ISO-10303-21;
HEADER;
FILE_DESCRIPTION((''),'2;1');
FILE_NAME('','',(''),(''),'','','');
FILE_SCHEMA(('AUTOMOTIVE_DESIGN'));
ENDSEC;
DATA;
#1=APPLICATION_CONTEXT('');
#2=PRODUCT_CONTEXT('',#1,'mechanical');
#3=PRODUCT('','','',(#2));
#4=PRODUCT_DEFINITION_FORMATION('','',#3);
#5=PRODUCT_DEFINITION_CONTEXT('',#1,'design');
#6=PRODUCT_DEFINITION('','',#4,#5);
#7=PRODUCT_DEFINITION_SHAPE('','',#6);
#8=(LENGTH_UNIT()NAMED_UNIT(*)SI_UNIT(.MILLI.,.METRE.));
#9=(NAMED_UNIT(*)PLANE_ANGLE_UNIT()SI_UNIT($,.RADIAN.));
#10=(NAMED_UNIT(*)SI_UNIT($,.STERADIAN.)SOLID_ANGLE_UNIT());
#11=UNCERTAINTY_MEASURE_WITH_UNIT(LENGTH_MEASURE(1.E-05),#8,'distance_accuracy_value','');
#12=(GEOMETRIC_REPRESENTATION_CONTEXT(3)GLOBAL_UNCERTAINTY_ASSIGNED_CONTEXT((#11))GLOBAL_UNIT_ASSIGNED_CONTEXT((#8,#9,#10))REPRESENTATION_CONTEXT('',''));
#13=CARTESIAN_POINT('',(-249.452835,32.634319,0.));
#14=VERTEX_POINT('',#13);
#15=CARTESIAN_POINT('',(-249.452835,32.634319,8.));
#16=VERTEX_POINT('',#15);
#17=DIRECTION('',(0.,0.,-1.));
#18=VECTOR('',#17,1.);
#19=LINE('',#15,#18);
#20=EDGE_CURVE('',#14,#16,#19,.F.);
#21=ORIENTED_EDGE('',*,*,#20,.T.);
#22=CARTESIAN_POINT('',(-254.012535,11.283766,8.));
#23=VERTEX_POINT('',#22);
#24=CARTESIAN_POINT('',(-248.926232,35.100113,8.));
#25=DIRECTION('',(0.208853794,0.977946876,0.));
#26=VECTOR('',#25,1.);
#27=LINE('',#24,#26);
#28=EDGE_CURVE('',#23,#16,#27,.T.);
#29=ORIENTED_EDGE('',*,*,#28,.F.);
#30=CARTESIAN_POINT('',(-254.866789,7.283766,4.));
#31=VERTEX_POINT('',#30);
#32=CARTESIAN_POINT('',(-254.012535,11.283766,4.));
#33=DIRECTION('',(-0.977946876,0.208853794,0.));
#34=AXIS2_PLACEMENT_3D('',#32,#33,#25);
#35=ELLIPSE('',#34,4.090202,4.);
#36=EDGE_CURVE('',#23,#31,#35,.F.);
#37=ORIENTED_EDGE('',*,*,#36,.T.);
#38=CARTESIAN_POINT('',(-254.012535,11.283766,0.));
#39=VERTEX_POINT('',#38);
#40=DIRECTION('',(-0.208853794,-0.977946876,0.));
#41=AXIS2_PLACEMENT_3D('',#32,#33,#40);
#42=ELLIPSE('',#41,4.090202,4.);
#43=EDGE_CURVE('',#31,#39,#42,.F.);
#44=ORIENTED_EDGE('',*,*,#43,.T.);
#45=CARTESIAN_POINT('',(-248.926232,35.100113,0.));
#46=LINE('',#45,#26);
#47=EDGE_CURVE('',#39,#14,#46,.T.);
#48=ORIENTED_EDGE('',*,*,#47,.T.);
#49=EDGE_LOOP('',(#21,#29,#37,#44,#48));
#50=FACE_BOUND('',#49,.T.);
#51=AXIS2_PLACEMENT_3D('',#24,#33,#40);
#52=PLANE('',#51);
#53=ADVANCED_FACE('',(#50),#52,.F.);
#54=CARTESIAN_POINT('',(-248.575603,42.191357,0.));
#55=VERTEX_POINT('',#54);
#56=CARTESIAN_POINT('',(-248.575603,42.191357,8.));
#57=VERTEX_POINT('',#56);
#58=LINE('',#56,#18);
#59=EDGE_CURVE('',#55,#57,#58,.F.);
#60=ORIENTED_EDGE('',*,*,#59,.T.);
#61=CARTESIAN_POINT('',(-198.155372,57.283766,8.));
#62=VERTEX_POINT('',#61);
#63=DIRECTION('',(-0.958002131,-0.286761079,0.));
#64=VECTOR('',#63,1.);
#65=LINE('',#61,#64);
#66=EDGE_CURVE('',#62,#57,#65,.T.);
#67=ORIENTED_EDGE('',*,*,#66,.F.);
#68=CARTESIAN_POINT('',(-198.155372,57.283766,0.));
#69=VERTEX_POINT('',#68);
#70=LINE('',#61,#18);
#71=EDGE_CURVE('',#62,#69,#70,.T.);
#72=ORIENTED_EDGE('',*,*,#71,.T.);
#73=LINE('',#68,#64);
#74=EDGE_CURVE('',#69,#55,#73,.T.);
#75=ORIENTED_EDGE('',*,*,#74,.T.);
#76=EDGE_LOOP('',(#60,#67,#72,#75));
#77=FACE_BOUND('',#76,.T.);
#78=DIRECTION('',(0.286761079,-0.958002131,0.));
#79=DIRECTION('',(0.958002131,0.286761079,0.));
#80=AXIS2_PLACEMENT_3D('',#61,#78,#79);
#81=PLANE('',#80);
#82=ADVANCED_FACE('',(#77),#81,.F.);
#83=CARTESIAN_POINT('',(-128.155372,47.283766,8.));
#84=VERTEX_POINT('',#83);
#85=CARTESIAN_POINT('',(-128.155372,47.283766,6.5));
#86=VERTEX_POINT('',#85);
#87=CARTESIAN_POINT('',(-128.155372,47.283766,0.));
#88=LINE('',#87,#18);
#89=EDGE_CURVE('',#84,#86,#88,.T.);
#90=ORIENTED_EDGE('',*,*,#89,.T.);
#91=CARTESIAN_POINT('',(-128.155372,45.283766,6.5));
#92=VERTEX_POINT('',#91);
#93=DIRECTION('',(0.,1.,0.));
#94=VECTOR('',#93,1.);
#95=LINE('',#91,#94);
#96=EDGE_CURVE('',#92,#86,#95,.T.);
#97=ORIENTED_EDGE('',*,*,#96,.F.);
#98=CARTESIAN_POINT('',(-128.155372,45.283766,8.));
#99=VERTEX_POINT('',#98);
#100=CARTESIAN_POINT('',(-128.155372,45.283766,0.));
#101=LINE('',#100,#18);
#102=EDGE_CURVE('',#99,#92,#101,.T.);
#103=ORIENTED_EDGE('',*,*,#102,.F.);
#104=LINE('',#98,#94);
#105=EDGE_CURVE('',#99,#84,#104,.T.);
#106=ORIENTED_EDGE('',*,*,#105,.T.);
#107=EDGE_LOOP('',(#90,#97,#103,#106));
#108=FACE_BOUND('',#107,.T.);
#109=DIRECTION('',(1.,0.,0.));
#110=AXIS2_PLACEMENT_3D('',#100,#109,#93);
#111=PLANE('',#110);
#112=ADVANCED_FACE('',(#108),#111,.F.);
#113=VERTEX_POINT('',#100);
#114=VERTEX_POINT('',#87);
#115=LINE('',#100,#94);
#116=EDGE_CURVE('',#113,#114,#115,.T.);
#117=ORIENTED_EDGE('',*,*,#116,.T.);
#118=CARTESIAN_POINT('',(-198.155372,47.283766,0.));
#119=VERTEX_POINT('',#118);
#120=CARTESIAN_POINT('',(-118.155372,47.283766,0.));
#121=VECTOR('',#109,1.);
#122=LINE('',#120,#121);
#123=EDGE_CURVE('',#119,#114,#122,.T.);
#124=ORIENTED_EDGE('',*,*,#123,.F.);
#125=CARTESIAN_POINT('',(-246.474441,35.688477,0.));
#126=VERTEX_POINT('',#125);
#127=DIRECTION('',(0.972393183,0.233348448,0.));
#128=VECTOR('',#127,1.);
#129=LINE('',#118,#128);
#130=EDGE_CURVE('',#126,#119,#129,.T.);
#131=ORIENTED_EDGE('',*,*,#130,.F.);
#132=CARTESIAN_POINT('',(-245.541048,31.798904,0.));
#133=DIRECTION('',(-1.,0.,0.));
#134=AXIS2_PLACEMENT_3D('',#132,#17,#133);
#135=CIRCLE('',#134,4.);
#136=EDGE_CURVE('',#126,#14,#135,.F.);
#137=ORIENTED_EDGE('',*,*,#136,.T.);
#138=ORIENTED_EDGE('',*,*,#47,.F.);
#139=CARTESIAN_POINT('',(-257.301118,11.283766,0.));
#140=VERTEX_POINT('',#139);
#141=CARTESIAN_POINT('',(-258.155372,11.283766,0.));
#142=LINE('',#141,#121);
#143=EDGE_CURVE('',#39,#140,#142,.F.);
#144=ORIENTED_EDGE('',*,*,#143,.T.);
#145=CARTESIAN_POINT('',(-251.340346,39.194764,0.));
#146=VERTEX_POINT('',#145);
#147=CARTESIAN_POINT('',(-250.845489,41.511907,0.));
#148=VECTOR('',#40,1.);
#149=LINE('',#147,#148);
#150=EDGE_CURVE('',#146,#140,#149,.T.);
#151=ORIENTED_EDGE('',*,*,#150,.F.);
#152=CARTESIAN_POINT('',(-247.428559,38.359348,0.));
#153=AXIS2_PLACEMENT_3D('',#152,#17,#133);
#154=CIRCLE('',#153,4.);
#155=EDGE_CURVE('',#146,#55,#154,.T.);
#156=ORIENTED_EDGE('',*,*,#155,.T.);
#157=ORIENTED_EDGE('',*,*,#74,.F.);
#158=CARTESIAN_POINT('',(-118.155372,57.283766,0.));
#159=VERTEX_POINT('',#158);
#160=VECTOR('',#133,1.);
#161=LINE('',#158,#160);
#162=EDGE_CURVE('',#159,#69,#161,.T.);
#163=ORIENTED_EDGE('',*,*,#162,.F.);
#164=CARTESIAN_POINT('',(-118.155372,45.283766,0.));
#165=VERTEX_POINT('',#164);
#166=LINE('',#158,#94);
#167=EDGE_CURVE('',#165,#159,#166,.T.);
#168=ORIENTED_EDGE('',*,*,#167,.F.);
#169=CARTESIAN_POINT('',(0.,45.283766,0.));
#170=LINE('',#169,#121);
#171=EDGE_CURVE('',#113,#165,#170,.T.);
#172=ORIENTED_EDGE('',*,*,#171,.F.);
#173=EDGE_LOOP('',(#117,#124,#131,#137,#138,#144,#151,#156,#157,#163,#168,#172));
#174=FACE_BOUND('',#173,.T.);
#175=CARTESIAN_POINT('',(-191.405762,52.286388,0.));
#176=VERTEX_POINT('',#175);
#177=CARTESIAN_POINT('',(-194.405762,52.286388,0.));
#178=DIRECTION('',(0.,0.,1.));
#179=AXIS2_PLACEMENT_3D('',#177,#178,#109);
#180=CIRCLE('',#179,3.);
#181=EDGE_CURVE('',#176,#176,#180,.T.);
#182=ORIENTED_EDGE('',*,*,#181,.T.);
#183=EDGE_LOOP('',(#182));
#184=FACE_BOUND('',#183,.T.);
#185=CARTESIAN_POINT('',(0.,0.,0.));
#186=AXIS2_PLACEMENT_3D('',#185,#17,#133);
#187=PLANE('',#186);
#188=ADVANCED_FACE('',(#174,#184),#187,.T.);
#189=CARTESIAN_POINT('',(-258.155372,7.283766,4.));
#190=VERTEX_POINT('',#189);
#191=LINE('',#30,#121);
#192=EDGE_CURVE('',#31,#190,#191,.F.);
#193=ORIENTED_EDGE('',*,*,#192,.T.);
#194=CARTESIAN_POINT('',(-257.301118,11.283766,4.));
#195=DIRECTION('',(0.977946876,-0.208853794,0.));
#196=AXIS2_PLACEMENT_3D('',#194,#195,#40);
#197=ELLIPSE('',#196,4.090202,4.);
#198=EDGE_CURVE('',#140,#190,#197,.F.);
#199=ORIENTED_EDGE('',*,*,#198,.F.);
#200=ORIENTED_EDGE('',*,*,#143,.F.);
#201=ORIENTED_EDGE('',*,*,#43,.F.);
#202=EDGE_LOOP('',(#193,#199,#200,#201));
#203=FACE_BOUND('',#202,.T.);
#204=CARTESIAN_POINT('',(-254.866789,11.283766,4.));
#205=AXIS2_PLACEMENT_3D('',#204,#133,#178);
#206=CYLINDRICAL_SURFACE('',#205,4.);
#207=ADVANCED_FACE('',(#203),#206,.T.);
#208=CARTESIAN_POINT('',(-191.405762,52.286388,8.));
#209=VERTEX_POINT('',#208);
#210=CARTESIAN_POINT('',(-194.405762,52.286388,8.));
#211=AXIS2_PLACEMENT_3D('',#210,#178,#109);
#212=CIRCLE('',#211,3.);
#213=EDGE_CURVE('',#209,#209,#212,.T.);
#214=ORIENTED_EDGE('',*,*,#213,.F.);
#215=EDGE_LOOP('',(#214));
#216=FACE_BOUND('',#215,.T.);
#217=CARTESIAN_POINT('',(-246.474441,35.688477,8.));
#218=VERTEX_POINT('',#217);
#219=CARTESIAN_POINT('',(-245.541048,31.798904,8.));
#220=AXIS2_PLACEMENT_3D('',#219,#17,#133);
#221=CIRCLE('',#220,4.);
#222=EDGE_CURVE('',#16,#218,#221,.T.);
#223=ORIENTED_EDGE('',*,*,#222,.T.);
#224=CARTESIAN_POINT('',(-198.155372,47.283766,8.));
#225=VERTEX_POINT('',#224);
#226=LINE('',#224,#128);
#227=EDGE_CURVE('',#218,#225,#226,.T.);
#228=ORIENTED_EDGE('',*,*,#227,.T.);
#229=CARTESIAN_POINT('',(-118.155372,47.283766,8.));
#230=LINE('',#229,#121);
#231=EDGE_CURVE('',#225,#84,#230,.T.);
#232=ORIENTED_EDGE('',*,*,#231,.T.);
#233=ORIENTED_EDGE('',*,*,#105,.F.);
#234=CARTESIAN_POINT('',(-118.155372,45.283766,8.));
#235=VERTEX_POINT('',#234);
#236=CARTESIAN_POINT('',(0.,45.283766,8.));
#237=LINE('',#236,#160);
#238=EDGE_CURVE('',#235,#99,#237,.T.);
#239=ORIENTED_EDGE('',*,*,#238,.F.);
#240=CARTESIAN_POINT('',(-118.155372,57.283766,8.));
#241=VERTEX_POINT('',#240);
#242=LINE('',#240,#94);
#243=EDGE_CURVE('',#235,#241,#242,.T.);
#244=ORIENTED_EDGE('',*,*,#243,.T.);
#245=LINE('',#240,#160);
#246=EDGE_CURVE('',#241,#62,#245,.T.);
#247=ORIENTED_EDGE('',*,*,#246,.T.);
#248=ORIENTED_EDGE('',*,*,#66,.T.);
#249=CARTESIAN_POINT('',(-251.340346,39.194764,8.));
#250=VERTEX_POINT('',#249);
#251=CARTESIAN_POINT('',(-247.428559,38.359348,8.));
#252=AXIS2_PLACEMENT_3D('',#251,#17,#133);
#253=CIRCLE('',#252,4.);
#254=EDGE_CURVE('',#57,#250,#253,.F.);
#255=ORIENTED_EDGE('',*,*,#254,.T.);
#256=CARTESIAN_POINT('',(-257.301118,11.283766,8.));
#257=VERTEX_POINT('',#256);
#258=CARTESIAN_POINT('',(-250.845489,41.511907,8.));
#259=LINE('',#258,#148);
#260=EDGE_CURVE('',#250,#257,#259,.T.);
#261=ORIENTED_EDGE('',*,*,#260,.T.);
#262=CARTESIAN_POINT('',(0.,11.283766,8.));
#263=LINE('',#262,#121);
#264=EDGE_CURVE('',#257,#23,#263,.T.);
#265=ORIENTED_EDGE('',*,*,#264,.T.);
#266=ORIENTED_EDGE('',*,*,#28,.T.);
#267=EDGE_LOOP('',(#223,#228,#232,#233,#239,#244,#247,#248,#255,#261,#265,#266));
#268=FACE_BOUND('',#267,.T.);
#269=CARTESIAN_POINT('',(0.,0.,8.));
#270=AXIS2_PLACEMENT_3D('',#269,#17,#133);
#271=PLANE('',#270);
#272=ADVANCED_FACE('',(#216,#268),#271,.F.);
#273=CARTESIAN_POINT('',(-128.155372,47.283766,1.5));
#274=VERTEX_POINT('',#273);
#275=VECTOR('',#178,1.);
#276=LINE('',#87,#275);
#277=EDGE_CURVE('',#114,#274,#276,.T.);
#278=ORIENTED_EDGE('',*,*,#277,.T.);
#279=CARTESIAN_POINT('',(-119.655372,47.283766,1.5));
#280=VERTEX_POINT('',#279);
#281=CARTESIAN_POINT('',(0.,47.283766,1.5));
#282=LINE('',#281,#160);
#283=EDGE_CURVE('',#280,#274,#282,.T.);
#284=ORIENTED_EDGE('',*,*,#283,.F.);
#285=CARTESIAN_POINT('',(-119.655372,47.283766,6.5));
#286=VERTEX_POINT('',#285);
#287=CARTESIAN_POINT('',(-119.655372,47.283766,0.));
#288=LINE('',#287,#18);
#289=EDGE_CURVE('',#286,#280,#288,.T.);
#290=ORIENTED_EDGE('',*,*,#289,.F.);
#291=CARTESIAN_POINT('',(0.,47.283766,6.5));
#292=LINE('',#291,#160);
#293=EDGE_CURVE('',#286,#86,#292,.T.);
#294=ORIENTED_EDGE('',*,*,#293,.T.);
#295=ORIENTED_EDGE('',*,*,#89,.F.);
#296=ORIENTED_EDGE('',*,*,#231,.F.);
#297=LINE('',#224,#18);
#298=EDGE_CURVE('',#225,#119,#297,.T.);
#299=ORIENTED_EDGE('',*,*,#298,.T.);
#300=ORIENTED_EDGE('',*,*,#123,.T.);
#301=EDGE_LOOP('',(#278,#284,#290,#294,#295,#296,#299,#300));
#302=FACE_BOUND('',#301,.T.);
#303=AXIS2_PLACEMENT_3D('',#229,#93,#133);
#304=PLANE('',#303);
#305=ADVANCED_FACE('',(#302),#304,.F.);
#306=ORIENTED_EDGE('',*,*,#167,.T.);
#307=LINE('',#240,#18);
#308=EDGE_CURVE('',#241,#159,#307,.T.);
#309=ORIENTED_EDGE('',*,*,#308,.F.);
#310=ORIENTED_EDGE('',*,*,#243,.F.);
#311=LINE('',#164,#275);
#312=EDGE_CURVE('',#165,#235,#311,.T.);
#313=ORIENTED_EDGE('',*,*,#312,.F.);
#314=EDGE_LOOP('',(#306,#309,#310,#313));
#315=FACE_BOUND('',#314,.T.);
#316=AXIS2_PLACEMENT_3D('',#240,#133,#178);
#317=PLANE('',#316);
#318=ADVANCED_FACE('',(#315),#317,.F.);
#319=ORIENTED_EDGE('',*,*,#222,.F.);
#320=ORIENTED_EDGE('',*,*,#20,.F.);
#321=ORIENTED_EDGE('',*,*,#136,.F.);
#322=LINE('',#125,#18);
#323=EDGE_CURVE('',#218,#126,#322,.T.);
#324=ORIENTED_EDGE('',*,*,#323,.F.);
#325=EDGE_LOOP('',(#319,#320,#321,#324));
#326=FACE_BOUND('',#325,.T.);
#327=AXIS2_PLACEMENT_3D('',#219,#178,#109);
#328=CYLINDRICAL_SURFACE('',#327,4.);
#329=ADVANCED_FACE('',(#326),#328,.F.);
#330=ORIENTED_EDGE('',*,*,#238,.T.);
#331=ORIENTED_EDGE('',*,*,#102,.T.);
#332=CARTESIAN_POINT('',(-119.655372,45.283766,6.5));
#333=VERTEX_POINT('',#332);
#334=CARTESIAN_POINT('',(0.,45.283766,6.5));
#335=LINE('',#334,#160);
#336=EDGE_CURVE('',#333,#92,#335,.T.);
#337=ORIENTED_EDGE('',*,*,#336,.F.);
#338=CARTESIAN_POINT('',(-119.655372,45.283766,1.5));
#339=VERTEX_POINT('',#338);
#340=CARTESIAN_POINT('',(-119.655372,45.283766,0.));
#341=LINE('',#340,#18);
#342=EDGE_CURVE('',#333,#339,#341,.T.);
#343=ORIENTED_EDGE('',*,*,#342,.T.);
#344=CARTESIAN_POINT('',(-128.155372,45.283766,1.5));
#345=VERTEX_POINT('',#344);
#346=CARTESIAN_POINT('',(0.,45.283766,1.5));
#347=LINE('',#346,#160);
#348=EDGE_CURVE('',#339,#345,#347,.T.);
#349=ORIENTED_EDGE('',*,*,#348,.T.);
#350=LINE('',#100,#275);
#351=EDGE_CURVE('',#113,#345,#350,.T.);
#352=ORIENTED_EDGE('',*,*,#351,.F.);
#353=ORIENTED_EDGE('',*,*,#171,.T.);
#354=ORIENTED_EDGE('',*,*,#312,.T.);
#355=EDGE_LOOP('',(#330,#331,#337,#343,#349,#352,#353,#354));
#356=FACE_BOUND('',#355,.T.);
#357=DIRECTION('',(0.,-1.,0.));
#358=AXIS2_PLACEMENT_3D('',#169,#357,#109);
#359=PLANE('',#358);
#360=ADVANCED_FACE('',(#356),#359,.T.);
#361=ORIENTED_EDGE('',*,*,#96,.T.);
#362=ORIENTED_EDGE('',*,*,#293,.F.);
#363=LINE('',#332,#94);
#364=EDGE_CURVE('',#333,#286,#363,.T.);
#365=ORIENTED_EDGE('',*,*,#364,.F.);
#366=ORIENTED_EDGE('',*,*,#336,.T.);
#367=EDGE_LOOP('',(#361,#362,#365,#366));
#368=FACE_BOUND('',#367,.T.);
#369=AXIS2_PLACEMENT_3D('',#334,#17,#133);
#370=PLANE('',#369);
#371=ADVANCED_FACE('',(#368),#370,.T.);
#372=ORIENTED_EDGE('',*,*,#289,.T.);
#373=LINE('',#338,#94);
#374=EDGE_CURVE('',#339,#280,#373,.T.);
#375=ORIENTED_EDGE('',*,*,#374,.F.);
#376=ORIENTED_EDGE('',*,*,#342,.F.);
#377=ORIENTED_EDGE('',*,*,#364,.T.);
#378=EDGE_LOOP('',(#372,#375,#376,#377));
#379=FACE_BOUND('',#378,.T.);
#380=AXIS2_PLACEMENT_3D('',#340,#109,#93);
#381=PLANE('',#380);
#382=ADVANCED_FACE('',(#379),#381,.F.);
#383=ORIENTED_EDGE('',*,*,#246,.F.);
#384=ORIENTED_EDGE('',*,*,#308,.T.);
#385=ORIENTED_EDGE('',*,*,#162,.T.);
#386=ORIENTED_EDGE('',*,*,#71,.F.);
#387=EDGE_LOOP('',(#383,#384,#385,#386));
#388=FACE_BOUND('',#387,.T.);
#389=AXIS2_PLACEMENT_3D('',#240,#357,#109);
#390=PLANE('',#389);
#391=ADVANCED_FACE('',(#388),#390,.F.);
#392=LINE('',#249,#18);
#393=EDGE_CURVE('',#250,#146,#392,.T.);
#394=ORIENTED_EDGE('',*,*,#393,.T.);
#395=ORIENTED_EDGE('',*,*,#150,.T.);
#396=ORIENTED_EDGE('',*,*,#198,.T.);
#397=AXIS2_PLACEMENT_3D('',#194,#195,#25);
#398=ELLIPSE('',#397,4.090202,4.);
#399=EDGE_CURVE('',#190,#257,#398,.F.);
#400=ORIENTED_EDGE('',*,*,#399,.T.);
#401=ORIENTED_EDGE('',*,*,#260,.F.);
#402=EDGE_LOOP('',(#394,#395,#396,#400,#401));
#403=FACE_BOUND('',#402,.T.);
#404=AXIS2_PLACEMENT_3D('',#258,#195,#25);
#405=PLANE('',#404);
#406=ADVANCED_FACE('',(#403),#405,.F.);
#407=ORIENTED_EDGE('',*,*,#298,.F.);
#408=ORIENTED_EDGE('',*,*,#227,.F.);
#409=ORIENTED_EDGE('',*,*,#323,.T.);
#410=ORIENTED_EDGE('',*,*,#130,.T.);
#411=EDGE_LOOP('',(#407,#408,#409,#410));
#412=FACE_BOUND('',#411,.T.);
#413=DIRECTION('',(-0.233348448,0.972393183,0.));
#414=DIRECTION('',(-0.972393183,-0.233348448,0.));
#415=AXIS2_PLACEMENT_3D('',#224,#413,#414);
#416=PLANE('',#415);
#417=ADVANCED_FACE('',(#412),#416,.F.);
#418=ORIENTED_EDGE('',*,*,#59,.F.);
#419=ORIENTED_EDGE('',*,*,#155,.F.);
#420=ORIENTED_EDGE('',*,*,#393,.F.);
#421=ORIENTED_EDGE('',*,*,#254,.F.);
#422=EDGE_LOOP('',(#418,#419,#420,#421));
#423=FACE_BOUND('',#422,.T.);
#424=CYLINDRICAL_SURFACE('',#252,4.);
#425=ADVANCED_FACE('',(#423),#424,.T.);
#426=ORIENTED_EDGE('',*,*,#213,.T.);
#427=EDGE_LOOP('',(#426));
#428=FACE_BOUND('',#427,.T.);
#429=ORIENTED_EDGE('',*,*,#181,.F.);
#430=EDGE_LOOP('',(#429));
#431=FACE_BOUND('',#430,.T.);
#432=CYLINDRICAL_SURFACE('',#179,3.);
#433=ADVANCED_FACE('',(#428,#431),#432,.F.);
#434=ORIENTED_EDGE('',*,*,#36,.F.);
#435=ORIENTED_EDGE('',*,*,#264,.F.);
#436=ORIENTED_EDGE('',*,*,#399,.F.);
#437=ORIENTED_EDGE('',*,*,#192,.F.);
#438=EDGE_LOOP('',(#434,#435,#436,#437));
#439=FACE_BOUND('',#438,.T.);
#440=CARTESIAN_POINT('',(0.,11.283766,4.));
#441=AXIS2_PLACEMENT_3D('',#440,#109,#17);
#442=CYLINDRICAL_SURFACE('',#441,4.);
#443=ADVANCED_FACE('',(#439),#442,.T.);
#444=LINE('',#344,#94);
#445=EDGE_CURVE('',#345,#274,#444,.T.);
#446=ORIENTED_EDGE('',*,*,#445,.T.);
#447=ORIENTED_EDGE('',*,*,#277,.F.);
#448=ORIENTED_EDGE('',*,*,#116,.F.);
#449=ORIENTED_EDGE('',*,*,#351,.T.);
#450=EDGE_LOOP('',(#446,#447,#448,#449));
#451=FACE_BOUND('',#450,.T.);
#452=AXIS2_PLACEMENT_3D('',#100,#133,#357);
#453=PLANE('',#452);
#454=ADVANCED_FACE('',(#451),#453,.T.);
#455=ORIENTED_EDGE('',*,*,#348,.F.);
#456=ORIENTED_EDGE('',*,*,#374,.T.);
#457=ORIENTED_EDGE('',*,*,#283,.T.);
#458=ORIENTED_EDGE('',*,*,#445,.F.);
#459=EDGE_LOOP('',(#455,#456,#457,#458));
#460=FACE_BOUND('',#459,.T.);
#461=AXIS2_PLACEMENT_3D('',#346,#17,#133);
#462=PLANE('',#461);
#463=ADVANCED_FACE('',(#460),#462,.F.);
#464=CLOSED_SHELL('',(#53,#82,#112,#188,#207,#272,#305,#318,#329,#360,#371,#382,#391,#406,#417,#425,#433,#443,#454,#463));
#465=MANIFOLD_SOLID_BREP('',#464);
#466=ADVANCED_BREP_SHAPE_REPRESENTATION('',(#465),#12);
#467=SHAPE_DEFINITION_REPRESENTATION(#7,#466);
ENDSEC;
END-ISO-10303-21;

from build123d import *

# Parameters (mm, degrees)
BOSS_EXTRUDE1_DEPTH = 8
SKETCH5_W           = 1.5
SKETCH5_H           = 2.448371941
BOSS_EXTRUDE4_DEPTH = 2
SKETCH6_R           = 3
CUT_EXTRUDE1_DEPTH  = 265.555525233
FILLET1_R           = 4


with BuildPart() as part:
    # Sketch1 → Boss-Extrude1 (new body)
    with BuildSketch(Plane.XY):
        Polygon((-118.155372005, 57.283765903), (-198.155372005, 57.283765903), (-250.845489232, 41.511906575), (-258.155372005, 7.283765903), (-254.866788986, 7.283765903), (-248.926231582, 35.100112729), (-198.155372005, 47.283765903), (-118.155372005, 47.283765903), align=None)
    extrude(amount=BOSS_EXTRUDE1_DEPTH)

    # Sketch5 → Boss-Extrude4 (add)
    with BuildSketch(Plane.XZ.offset(-47.283765903)):
        Polygon((-128.155372005, 6.5), (-119.655372005, 6.5), (-118.155372005, 6.5), (-118.155372005, 8), (-128.155372005, 8), align=None)
        Polygon((-119.655372005, 4.051628059), (-119.655372005, 3.948371941), (-118.155372005, 3.948371941), (-118.155372005, 6.5), (-119.655372005, 6.5), align=None)
        with Locations((-118.905372005, 2.724185971)):
            Rectangle(SKETCH5_W, SKETCH5_H)
        Polygon((-118.155372005, 1.5), (-119.655372005, 1.5), (-128.155372005, 1.5), (-128.155372005, 0), (-118.155372005, 0), align=None)
    extrude(amount=BOSS_EXTRUDE4_DEPTH)

    # Sketch6 → Cut-Extrude1 (cut, through all)
    with BuildSketch(Plane.XY.offset(8)):
        with Locations((-194.405761522, 52.286388284)):
            Circle(SKETCH6_R)
    extrude(amount=-CUT_EXTRUDE1_DEPTH, mode=Mode.SUBTRACT)

    # Fillet1
    fillet1_edges = [part.edges().sort_by_distance(p)[0] for p in [
        (-248.926231582, 35.100112729, 4),
        (-250.845489232, 41.511906575, 4),
        (-256.511080495, 7.283765903, 0),
        (-256.511080495, 7.283765903, 8),
    ]]
    fillet(fillet1_edges, radius=FILLET1_R - 0.0001)  # a hair under: the kernel refuses the full size


solid = part.part
